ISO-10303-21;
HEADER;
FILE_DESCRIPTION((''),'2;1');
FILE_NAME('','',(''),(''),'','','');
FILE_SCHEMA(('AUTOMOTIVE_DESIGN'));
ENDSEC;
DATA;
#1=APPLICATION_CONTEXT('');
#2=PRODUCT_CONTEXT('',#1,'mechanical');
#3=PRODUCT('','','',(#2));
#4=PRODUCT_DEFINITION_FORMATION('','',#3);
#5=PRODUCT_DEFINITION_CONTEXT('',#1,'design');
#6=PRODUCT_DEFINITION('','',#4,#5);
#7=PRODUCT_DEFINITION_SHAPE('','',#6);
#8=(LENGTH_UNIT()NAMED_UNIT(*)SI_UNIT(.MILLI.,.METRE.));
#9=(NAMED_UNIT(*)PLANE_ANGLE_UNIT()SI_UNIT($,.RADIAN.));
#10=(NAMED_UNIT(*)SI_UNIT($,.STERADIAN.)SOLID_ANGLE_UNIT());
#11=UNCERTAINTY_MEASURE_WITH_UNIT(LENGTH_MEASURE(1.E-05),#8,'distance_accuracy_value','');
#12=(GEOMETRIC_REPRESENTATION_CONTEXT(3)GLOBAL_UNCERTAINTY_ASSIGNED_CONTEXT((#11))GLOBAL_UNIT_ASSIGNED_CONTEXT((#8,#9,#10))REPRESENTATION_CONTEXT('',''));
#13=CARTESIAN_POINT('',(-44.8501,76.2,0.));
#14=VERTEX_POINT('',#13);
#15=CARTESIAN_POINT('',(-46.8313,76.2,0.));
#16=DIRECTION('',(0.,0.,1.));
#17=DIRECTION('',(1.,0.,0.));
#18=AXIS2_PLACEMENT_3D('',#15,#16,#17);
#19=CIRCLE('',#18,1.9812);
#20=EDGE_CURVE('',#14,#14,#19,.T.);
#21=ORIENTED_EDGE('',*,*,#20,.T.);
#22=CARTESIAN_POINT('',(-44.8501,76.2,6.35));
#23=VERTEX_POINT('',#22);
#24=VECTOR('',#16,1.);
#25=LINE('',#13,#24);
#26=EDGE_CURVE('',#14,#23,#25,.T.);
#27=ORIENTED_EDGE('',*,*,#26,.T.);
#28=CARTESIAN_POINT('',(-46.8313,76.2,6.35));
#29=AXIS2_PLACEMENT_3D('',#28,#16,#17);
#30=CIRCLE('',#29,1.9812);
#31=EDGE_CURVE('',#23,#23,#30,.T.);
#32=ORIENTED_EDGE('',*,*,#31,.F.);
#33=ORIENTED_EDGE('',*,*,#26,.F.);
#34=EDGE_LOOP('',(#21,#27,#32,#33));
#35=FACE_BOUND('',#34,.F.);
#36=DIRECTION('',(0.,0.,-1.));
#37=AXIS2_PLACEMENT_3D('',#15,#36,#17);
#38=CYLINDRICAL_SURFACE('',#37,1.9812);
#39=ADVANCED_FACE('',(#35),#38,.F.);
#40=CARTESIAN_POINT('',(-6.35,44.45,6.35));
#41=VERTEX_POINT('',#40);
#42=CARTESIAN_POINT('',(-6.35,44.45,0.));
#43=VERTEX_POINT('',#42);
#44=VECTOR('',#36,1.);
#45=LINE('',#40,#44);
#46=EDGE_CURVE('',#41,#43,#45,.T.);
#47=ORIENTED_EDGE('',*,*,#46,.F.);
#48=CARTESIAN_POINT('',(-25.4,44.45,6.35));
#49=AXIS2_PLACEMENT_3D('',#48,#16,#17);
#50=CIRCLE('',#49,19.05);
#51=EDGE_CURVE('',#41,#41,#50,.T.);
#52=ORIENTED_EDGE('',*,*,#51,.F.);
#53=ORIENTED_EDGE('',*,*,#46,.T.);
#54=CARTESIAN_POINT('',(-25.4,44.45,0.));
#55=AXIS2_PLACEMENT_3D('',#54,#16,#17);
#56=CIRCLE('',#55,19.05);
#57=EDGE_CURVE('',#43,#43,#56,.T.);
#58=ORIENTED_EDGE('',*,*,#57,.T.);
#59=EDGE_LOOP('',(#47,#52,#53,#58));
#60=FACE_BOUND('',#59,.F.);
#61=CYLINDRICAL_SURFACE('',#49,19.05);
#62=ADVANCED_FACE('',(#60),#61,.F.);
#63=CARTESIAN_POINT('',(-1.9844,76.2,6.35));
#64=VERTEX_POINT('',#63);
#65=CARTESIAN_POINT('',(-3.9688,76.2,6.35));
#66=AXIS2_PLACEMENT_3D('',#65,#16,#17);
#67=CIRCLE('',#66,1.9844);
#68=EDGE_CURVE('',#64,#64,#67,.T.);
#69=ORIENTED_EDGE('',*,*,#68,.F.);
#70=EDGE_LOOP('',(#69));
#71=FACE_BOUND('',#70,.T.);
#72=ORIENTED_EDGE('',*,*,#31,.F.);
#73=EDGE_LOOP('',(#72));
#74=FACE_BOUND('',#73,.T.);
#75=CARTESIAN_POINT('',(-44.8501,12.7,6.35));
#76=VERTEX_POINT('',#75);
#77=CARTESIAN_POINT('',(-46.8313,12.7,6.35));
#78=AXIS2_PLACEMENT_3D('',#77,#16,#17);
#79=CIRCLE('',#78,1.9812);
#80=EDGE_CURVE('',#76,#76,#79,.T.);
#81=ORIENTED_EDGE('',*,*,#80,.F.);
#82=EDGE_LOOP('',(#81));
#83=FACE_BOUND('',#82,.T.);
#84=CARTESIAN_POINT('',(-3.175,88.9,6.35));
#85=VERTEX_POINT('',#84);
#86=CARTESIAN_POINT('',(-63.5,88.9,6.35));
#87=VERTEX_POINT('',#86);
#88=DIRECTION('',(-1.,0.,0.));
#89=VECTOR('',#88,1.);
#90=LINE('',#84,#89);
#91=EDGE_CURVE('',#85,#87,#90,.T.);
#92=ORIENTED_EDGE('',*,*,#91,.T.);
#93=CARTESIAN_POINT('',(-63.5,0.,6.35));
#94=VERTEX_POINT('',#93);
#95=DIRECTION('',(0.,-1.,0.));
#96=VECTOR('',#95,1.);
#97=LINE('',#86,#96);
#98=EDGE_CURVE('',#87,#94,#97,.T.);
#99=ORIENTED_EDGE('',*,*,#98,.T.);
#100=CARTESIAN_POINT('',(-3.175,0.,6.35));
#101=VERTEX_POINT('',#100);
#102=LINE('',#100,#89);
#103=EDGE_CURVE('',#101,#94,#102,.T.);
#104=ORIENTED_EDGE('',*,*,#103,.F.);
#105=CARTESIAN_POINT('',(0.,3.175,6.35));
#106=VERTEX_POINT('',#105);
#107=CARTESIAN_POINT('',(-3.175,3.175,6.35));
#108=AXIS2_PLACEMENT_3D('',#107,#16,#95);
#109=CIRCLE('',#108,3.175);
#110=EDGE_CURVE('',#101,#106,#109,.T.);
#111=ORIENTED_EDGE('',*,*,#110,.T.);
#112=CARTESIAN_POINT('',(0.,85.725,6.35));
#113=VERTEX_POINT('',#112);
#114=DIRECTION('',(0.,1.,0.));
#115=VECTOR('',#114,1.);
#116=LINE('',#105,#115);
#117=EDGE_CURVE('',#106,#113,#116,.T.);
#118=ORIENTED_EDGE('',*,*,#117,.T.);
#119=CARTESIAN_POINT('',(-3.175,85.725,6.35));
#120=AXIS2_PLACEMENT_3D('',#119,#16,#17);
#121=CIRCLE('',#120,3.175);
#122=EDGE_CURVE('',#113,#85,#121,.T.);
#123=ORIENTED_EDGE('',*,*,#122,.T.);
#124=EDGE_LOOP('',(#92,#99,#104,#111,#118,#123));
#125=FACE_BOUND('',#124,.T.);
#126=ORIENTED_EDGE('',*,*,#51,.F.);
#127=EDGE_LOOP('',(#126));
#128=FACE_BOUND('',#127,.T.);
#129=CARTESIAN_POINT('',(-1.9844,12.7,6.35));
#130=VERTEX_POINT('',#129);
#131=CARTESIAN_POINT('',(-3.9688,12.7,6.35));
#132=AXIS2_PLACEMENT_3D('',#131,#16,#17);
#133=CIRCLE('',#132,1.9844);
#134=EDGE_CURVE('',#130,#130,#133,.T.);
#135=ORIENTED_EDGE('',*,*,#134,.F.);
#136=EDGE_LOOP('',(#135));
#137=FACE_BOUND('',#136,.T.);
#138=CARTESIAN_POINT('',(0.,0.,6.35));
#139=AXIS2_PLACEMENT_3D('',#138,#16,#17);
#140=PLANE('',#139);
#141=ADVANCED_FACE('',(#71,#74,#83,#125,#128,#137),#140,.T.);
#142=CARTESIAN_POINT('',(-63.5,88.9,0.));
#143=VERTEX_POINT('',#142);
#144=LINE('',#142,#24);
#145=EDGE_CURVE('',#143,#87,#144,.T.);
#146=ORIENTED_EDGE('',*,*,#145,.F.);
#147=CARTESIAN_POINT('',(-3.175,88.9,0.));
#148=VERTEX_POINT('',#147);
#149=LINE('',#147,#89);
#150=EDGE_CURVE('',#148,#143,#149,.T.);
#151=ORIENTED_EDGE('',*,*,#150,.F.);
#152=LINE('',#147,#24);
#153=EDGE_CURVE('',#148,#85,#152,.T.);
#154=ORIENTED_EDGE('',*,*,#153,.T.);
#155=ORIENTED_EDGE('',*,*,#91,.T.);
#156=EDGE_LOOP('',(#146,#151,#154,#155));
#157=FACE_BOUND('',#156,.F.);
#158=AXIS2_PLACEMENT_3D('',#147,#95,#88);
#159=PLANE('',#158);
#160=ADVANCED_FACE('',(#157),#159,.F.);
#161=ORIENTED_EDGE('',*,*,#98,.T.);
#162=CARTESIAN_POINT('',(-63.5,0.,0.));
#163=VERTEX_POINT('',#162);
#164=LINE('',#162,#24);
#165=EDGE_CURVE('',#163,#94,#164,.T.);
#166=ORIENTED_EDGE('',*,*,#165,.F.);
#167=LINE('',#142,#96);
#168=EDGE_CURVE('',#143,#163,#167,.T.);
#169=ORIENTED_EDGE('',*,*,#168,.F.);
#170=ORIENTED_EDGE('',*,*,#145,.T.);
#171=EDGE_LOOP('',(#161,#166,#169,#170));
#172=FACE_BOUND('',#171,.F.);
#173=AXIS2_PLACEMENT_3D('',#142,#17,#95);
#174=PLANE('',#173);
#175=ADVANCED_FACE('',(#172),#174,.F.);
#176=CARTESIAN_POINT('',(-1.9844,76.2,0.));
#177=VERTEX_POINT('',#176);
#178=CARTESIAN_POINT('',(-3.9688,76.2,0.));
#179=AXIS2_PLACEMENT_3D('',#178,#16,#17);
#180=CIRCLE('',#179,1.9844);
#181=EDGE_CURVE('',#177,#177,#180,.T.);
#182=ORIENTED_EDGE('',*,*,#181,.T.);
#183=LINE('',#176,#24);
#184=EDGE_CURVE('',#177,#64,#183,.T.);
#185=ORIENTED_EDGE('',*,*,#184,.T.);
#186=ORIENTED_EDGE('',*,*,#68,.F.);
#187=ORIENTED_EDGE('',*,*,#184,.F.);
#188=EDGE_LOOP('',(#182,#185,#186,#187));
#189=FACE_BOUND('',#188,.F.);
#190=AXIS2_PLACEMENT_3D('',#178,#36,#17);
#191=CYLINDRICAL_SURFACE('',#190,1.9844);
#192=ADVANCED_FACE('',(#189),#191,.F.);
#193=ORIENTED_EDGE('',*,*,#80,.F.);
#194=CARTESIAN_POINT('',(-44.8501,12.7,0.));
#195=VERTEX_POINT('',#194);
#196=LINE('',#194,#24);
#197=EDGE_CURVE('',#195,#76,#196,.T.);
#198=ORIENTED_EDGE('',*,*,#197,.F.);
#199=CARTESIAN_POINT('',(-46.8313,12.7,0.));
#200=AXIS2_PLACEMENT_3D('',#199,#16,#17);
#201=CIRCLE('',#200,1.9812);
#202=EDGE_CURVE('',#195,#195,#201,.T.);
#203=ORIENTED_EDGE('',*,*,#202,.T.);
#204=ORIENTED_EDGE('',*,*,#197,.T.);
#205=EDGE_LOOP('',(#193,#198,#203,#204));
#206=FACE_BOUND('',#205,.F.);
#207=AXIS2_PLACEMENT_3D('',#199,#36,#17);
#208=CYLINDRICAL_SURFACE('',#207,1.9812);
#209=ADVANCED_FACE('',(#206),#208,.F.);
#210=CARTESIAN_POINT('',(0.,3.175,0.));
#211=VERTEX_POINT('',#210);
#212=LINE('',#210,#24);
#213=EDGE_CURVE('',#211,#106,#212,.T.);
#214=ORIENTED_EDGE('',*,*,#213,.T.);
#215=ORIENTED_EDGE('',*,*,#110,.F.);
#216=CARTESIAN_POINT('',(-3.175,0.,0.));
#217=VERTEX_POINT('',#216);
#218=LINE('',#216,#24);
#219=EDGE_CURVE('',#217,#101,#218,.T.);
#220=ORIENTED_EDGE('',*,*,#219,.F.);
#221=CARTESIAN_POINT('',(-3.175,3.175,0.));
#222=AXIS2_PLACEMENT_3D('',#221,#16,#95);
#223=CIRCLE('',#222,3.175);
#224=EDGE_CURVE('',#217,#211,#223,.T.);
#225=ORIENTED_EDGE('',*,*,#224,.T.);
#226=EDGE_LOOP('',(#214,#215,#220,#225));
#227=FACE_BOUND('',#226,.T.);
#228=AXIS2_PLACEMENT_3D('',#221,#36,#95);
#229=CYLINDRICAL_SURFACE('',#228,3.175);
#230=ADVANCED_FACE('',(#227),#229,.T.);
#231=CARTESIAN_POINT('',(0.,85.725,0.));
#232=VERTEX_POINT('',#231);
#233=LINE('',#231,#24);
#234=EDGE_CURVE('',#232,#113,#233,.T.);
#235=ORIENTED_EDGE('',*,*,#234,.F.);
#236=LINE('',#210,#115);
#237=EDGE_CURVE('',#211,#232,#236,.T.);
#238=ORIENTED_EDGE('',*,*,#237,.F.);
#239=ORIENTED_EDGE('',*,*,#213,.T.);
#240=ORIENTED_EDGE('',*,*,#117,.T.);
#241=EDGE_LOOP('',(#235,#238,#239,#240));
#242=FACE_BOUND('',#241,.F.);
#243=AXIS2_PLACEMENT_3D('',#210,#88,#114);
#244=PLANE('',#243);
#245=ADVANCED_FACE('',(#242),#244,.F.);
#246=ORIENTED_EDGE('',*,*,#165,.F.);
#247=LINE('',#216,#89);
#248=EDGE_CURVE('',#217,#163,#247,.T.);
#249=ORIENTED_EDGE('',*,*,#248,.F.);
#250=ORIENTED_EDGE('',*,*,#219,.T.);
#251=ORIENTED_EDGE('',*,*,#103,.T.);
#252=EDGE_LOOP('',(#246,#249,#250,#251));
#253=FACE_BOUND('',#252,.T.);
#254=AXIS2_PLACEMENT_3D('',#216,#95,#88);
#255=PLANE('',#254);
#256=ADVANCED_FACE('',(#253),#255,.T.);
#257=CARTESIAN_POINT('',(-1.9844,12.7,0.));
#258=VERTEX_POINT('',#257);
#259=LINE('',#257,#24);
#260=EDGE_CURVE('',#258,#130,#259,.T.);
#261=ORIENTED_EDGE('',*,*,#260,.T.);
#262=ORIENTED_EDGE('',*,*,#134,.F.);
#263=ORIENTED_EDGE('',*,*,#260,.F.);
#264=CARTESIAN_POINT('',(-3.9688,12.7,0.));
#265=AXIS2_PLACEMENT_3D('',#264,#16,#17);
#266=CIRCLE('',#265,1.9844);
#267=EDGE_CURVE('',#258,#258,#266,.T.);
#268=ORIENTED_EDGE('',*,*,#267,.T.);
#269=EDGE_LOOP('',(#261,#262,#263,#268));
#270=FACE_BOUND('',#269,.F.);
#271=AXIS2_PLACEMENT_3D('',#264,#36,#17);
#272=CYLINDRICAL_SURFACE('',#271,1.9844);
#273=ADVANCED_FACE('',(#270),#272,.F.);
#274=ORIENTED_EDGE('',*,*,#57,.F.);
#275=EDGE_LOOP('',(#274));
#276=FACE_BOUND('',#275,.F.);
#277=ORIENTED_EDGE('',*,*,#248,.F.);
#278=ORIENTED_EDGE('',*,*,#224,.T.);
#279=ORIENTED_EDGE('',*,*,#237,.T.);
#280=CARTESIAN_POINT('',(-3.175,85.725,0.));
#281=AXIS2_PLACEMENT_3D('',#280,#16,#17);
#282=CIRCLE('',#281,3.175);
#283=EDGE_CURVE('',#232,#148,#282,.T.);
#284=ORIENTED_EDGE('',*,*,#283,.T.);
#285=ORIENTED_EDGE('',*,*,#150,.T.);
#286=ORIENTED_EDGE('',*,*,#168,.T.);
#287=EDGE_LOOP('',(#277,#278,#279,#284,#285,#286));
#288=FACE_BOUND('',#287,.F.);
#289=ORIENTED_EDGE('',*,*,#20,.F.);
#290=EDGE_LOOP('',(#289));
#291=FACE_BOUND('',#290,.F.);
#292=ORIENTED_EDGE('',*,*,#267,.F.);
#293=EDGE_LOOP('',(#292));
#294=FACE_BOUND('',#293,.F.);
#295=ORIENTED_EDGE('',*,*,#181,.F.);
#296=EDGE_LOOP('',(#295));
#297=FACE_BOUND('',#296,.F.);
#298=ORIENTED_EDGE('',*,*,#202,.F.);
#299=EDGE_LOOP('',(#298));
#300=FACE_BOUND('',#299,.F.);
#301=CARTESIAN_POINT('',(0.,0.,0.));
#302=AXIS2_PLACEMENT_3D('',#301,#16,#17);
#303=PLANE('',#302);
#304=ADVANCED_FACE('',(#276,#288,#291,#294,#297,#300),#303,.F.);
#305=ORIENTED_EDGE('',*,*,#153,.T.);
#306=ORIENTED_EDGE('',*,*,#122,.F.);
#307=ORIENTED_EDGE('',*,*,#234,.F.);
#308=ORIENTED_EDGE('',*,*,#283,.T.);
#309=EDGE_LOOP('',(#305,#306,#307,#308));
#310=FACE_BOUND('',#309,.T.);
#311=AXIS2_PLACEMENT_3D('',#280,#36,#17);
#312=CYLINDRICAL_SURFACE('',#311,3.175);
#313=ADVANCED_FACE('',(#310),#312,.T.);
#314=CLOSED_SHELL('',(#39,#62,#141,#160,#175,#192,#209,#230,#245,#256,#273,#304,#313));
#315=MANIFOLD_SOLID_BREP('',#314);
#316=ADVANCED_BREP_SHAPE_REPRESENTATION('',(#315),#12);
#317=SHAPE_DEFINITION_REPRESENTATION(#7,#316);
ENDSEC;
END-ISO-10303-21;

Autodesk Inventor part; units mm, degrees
ref_plane "YZ Plane" through (0, 0, 0) normal (1, 0, 0) x (0, 1, 0)
ref_plane "XZ Plane" through (0, 0, 0) normal (0, 1, 0) x (-1, 0, 0)
ref_plane "XY Plane" through (0, 0, 0) normal (0, 0, 1) x (1, 0, 0)
sketch "Sketch1" plane through (0, 0, 0) normal (0, 0, 1) x (1, 0, 0)
  line L0 (-3.175, 0) -> (-63.5, 0)
  line L1 (0, 3.175) -> (0, 85.725)
  line L2 (-3.175, 88.9) -> (-63.5, 88.9)
  line L3 (-63.5, 88.9) -> (-63.5, 0)
  circle A0 centre (-3.9688, 76.2) radius 1.9844
  circle A1 centre (-3.9688, 12.7) radius 1.9844
  circle A2 centre (-46.8313, 12.7) radius 1.9812
  circle A3 centre (-46.8313, 76.2) radius 1.9812
  arc A4 (0, 85.725) -> (-3.175, 88.9) centre (-3.175, 85.725) ccw
  arc A5 (-3.175, 0) -> (0, 3.175) centre (-3.175, 3.175) ccw
  point P0 (0, 0)
  point P1 (0, 88.9)
  dimension "d0" = 63.5
  dimension "d1" = 88.9
  dimension "d2" = 3.9688
  dimension "d3" = 3.9688
  dimension "d4" = 3.9624
  dimension "d5" = 3.9624
  dimension "d6" = 12.7
  dimension "d7" = 12.7
  dimension "d8" = 12.7
  dimension "d9" = 3.9688
  dimension "d10" = 3.9688
  dimension "d11" = 16.6687
  dimension "d12" = 12.7
  dimension "d13" = 16.6687
  dimension "d19" = 3.175
extrude "Plate1" add sketch "Sketch1" along normal blind 6.35
sketch "Sketch2" plane through (0, 0, 6.35) normal (0, 0, 1) x (1, 0, 0)
  line L0 (0, 85.725) -> (0, 3.175) projected
  line L1 (-63.5, 88.9) -> (-3.175, 88.9) projected
  line L2 (0, 44.45) -> (-25.4, 44.45)
  circle A0 centre (-25.4, 44.45) radius 19.05
  point P0 (0, 0)
  point P1 (0, 88.9)
  dimension "d15" = 25.4
  dimension "d16" = 38.1
extrude "Cut1" cut sketch "Sketch2" against normal blind 6.35
equation "\"d17\" = Thickness"
equation "\"BendRadius\" = Thickness"
equation "\"BendReliefWidth\" = Thickness"
equation "\"BendReliefDepth\" = 0.5 * Thickness"
equation "\"CornerReliefSize\" = 4 * Thickness"
equation "\"MinimumRemnant\" = 2 * Thickness"
equation "\"TransitionRadius\" = BendRadius"
equation "\"JacobiRadiusSize\" = BendRadius"
equation "\"GapSize\" = Thickness"
equation "\"d14\" = BendRadius"
equation "\"Thickness\" = 6.35"
properties part number "bearing faceplate"
